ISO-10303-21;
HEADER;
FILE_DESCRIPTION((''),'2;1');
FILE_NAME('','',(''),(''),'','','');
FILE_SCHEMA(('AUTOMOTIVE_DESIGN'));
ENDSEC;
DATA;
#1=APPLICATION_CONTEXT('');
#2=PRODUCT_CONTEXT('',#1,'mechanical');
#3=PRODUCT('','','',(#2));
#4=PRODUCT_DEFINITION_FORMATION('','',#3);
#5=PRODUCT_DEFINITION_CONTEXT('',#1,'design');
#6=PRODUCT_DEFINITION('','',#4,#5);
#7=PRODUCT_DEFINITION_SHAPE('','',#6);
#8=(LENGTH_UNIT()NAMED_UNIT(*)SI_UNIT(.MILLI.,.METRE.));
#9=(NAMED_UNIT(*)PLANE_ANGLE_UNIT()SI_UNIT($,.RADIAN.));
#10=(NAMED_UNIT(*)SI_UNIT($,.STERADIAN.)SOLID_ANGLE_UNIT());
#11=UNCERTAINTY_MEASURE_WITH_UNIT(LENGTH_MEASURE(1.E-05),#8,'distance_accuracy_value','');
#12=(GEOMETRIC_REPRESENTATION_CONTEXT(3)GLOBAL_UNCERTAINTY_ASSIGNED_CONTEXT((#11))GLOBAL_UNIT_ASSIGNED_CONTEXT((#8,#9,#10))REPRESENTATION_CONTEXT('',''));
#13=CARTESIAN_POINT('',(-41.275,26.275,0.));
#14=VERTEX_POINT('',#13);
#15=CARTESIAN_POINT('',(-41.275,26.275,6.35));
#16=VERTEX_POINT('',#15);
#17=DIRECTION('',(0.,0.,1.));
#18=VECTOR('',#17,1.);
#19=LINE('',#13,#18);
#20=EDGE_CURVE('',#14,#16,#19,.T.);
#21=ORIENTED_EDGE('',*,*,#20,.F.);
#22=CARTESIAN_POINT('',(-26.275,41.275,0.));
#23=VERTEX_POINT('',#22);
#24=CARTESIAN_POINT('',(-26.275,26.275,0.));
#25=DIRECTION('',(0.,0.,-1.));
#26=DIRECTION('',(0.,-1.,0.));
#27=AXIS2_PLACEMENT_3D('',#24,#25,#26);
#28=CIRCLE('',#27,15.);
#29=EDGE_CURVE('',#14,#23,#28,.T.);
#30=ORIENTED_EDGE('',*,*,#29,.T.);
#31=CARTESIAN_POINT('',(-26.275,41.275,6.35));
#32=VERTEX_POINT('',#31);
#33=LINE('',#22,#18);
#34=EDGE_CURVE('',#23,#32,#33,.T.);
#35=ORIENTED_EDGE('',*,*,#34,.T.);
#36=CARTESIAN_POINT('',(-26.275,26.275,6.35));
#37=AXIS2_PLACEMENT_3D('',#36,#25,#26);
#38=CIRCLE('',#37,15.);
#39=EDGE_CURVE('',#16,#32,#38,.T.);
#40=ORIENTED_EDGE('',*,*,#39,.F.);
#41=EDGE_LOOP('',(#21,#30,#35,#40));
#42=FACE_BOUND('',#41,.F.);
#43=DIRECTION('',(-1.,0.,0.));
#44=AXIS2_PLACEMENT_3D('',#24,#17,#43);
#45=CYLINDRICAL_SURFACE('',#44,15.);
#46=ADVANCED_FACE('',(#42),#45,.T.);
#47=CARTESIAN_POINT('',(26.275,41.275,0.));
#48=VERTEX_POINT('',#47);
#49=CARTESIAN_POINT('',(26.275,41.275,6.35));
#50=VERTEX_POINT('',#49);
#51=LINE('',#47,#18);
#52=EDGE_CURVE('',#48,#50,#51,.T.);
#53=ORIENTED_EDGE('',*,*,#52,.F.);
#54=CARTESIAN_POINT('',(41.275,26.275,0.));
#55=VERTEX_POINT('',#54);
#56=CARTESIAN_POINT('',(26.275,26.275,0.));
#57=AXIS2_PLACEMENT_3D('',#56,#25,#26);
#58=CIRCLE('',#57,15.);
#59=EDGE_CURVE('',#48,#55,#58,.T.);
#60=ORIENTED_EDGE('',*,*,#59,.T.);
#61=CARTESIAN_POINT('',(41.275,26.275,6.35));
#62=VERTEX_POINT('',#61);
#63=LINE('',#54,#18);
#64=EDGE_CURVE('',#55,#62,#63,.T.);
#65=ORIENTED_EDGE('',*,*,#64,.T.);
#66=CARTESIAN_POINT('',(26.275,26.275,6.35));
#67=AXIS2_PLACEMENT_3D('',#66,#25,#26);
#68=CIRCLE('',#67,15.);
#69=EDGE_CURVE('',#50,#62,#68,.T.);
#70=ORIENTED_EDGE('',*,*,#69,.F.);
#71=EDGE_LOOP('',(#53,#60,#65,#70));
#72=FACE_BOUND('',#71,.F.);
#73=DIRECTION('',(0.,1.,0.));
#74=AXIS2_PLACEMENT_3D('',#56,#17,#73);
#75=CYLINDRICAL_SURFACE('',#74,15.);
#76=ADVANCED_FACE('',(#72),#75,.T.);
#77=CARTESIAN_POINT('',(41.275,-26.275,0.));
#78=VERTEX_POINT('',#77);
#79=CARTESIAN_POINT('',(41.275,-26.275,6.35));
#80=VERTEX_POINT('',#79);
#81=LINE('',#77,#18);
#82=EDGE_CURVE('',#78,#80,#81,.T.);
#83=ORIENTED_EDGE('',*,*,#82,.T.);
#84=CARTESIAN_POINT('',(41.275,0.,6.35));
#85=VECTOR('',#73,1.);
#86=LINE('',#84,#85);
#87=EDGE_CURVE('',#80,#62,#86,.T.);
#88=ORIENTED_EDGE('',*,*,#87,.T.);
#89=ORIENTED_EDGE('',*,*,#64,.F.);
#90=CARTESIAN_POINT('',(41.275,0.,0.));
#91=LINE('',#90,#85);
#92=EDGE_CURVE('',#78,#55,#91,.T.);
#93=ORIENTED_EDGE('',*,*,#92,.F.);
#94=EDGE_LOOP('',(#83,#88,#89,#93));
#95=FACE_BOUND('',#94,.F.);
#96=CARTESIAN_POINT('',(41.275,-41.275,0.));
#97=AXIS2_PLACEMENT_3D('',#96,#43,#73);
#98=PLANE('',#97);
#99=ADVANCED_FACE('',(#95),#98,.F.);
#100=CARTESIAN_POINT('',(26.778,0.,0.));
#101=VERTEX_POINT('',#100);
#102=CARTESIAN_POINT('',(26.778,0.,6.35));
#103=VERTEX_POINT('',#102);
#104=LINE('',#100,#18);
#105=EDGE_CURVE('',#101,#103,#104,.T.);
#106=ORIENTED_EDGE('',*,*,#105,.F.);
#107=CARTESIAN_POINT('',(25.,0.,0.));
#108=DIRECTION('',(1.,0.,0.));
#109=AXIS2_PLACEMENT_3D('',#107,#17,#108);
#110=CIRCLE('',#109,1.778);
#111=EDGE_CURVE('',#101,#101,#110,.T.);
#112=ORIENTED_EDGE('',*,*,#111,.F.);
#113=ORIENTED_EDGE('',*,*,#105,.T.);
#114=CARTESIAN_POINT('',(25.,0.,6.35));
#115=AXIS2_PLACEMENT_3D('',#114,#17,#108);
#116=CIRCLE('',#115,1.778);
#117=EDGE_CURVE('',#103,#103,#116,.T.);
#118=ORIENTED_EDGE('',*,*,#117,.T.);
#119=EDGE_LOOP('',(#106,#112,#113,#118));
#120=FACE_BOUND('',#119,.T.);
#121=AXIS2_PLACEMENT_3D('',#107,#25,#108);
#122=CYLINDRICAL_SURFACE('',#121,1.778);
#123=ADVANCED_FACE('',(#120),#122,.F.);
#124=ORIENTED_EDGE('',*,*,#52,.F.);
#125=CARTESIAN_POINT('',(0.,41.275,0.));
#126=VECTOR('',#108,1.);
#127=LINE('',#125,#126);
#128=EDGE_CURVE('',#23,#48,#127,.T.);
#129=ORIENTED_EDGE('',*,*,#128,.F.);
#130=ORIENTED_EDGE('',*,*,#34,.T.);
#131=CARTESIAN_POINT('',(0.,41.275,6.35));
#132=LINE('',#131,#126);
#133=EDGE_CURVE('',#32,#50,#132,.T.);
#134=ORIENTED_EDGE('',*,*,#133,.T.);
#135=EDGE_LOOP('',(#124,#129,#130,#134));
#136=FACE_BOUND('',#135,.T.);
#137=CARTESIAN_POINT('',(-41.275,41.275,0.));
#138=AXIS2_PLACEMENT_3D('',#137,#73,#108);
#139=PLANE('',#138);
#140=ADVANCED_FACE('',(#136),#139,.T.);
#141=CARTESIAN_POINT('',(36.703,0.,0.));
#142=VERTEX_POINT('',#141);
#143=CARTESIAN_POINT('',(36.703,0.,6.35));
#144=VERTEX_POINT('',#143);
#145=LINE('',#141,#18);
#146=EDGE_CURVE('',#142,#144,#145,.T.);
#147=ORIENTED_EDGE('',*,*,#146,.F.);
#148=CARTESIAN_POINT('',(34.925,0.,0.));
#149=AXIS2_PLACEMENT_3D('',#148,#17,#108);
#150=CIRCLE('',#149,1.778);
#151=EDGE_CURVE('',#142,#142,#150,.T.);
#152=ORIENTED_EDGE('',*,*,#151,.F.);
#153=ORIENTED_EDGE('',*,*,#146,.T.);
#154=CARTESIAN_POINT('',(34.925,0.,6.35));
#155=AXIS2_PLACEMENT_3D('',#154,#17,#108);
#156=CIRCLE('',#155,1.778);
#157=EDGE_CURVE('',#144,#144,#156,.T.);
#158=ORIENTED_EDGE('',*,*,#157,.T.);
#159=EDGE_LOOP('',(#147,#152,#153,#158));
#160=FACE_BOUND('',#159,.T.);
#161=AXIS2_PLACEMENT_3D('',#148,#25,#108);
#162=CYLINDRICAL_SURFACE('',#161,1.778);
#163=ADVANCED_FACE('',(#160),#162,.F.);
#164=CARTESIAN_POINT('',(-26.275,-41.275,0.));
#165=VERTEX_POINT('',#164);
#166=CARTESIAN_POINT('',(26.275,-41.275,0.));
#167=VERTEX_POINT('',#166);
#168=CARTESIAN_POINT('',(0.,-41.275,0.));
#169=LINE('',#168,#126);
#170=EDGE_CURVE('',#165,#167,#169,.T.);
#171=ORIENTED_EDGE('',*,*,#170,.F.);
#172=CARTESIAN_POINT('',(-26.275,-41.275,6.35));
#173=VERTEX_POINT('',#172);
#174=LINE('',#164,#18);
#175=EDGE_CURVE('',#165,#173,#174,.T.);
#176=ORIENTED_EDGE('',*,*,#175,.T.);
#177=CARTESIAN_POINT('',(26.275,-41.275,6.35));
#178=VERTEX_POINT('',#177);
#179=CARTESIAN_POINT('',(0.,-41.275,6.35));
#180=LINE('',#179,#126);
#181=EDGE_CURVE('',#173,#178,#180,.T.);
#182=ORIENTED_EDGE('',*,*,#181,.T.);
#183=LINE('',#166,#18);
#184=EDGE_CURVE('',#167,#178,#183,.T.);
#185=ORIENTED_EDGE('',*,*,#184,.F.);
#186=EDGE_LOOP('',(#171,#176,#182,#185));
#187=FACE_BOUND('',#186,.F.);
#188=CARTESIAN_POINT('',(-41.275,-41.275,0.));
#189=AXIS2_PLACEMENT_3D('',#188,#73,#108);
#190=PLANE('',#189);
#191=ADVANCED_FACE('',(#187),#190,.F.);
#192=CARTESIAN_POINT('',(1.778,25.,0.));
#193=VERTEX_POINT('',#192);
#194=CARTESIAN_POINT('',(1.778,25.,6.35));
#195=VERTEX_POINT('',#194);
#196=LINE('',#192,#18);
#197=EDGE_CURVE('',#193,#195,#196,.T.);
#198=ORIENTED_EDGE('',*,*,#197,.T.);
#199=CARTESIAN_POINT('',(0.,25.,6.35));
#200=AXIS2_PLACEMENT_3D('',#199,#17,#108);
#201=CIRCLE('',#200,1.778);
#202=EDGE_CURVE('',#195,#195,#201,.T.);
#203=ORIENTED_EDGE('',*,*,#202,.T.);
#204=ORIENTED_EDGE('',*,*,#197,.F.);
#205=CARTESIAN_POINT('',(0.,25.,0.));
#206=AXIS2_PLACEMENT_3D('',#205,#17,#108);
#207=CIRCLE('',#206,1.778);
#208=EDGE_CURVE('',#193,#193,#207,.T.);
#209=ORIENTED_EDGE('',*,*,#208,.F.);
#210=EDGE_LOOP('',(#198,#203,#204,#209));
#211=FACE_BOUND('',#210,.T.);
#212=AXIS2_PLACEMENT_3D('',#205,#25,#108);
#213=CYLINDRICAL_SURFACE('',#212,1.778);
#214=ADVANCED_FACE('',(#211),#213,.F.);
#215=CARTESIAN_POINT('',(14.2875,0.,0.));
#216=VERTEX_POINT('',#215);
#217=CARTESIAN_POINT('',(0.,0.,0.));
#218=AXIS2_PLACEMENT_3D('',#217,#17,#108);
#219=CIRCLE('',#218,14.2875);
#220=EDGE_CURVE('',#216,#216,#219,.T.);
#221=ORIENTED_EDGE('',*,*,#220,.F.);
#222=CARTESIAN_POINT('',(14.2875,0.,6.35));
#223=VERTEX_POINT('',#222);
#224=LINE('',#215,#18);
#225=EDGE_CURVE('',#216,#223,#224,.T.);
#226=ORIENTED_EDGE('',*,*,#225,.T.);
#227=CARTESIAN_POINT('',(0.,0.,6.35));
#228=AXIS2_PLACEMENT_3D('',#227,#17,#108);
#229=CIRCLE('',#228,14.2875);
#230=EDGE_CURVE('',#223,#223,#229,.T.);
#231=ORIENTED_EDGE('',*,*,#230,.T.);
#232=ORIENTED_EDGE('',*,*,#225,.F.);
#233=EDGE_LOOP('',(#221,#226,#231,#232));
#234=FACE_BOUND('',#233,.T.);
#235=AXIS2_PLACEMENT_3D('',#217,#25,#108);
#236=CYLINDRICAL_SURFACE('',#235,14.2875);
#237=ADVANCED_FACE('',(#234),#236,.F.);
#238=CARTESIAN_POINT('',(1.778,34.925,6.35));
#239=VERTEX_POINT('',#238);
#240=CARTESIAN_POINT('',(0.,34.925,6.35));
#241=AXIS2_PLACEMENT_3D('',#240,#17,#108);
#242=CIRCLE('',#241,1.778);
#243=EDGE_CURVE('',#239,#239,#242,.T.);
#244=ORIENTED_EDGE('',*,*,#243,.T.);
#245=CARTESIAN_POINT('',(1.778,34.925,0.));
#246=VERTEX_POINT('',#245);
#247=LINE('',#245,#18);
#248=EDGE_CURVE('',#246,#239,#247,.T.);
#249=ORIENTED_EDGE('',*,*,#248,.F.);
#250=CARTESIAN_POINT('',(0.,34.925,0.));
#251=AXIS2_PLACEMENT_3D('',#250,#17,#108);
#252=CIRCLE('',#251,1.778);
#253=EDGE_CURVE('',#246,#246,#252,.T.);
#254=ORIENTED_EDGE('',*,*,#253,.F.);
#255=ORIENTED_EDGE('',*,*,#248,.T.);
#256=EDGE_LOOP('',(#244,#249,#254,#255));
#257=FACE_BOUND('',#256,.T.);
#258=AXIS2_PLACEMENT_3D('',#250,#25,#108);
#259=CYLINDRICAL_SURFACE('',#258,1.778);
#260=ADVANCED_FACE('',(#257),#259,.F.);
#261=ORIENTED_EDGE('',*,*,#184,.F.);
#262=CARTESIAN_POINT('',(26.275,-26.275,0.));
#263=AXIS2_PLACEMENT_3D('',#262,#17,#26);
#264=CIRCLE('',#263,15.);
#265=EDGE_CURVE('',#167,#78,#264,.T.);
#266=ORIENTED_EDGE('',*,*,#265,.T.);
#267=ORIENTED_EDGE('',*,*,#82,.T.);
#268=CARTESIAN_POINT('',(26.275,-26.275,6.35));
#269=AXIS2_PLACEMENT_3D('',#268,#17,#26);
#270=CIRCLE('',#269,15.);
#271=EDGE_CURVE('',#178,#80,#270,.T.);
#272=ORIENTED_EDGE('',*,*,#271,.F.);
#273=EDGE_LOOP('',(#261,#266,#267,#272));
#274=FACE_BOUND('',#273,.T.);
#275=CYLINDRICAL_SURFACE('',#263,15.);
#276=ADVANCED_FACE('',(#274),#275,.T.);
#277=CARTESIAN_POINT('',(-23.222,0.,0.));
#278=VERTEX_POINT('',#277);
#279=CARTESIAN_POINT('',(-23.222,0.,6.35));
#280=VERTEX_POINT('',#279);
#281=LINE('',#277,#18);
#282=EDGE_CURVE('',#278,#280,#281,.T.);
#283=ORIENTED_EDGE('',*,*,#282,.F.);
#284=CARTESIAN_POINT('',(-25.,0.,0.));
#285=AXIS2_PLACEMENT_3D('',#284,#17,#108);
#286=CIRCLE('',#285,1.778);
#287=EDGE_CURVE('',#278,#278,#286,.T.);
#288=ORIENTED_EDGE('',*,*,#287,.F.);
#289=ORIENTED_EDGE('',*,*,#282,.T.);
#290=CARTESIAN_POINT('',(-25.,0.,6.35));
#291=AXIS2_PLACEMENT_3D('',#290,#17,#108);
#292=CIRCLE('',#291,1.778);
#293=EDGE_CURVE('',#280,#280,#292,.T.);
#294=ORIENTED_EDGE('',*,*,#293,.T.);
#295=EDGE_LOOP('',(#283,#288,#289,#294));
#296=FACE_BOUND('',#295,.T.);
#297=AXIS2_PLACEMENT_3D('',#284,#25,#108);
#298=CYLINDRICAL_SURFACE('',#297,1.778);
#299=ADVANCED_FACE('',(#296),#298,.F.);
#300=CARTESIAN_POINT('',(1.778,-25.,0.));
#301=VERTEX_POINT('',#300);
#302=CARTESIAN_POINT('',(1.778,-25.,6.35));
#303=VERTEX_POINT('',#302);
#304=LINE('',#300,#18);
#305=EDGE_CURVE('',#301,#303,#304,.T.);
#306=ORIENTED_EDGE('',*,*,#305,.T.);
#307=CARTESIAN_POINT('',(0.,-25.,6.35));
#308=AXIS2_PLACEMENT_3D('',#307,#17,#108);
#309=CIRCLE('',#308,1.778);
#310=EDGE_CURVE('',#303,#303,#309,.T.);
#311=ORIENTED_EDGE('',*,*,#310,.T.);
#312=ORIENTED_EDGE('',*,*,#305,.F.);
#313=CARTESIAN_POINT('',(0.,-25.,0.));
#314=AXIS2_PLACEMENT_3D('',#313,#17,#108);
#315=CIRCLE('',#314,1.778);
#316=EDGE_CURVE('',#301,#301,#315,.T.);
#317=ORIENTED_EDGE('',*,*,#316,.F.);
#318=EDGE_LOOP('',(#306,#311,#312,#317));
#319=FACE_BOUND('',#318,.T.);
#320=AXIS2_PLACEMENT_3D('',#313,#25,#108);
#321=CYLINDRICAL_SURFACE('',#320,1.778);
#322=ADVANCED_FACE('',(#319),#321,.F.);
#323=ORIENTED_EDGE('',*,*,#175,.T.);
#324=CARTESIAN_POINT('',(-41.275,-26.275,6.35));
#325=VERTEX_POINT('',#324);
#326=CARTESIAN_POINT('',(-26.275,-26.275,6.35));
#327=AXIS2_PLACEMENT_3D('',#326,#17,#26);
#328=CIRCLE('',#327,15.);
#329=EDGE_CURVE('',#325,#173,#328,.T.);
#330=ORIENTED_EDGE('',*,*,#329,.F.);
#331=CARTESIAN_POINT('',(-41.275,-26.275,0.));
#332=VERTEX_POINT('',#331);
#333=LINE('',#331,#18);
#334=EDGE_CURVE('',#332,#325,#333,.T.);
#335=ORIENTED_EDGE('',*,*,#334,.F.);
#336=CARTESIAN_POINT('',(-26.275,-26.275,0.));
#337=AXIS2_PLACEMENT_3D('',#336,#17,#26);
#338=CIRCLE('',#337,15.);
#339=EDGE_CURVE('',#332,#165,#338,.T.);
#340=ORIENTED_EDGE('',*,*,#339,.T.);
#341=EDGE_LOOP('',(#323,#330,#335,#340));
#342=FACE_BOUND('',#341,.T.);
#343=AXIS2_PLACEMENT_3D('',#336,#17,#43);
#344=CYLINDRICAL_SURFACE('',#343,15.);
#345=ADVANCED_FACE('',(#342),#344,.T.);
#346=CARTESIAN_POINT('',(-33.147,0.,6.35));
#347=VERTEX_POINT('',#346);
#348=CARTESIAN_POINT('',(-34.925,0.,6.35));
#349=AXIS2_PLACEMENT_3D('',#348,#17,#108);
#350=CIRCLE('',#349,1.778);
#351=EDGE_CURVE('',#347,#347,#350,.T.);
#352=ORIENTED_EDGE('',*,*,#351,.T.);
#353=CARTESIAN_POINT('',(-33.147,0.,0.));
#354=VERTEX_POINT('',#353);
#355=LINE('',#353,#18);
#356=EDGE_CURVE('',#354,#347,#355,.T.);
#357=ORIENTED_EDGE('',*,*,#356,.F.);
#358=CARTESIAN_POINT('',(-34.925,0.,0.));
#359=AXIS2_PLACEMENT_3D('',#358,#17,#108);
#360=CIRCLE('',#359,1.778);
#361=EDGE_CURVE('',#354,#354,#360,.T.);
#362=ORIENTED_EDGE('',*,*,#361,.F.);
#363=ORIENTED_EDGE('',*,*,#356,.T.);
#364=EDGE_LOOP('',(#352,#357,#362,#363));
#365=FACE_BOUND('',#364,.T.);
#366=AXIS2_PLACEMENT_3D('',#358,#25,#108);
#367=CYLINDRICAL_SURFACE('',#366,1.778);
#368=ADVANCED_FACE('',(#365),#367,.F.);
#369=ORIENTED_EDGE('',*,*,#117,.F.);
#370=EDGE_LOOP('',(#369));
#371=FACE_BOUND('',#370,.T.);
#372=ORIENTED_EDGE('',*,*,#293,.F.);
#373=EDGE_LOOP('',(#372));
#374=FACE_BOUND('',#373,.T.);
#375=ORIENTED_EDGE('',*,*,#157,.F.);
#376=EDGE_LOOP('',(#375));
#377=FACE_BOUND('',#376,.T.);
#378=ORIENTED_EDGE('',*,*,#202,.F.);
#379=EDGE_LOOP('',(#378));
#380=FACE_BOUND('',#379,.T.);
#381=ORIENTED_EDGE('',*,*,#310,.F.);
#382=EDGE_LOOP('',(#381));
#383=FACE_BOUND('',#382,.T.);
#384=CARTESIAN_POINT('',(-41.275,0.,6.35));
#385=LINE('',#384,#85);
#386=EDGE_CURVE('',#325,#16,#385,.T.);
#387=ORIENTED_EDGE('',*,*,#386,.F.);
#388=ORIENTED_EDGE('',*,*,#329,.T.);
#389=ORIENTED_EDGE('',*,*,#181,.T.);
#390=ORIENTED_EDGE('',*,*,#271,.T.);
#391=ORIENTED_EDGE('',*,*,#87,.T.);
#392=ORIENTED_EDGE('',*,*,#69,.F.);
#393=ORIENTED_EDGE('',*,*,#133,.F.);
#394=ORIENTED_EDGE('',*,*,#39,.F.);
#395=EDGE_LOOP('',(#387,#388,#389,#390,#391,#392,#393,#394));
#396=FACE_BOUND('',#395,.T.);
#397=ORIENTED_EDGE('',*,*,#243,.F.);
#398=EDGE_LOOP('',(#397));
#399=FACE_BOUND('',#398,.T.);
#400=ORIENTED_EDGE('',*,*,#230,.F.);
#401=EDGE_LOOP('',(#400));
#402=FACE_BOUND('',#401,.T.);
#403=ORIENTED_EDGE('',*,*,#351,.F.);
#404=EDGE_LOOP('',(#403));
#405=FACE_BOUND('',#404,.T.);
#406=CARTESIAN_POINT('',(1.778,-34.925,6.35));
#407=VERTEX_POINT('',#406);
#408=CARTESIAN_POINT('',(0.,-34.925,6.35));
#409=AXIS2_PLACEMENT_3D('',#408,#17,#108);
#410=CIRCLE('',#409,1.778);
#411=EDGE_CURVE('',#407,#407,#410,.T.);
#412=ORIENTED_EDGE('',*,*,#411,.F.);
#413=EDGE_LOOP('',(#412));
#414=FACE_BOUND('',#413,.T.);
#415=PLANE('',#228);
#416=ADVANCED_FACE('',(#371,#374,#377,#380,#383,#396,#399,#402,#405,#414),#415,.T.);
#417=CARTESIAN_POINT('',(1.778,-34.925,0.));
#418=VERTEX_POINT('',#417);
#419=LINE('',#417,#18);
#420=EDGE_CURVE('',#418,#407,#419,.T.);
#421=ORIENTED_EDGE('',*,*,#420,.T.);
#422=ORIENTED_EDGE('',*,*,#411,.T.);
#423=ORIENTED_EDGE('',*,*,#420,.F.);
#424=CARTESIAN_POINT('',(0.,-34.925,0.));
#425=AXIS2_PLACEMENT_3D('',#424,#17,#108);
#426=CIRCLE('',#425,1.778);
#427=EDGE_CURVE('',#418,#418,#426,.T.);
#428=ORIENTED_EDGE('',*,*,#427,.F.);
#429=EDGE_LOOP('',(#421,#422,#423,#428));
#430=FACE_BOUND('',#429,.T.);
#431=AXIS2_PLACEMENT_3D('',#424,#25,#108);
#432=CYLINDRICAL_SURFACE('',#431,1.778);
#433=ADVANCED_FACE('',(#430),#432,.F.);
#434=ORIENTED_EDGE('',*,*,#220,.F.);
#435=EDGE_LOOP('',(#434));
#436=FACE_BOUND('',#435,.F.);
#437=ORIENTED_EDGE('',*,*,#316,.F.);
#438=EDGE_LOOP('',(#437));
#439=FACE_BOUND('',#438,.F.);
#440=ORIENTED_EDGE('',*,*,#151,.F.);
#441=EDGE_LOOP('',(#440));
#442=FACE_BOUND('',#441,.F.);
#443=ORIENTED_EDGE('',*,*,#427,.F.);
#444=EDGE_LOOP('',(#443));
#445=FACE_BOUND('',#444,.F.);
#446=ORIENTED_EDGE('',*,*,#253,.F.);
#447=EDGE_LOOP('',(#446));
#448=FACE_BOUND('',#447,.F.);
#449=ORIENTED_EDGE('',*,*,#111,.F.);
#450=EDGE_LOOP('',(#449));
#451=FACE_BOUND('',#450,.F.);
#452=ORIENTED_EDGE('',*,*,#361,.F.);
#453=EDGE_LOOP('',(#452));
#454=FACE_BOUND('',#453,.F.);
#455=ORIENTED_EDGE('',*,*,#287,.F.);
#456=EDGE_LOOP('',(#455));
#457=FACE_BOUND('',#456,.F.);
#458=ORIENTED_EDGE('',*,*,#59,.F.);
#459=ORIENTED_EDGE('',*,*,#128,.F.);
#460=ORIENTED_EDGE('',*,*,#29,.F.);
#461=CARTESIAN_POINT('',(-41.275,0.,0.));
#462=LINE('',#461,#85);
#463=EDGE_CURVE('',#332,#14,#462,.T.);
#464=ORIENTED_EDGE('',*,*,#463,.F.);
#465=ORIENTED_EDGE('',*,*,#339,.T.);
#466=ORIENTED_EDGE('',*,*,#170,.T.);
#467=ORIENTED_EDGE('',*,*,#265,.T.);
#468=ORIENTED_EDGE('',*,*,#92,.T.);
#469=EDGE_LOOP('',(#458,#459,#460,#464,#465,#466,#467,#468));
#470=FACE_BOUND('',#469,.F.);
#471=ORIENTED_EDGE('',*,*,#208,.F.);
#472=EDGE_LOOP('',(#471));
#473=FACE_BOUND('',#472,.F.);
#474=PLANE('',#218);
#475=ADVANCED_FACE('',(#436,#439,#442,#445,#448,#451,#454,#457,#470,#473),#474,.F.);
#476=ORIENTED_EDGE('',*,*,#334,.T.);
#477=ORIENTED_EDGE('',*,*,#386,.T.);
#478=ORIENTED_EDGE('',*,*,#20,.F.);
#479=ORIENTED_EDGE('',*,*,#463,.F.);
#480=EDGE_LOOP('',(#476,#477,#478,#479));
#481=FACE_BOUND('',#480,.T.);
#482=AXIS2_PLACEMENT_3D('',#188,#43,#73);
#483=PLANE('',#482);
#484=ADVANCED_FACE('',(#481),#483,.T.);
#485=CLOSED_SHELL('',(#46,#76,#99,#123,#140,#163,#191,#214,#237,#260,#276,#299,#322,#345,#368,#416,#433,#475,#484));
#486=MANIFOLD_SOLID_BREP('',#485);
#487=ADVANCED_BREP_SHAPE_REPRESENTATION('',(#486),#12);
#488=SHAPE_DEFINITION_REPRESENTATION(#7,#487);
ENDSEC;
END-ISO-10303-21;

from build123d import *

# Parameters (mm, degrees)
F0_W     = 82.55
F0_H     = 82.55
F0_R     = 1.778
F0_R_2   = 14.2875
F1_DEPTH = 6.35
F2_R     = 15


# Not quite as in the source:
# - a length typed as a fraction of an inch, garbled in the dataset ("3 / 203.2 mm" for 3/8 in), is restored


with BuildPart() as f1:
    # F0 (on Top) → F1 (new body)
    with BuildSketch(Plane.XY):
        Rectangle(F0_W, F0_H)
        with Locations((0, -34.925)):
            Circle(F0_R, mode=Mode.SUBTRACT)
        with Locations((0, -25)):
            Circle(F0_R, mode=Mode.SUBTRACT)
        with Locations((-34.925, 0)):
            Circle(F0_R, mode=Mode.SUBTRACT)
        with Locations((-25, 0)):
            Circle(F0_R, mode=Mode.SUBTRACT)
        Circle(F0_R_2, mode=Mode.SUBTRACT)
        with Locations((25, 0)):
            Circle(F0_R, mode=Mode.SUBTRACT)
        with Locations((34.925, 0)):
            Circle(F0_R, mode=Mode.SUBTRACT)
        with Locations((0, 25)):
            Circle(F0_R, mode=Mode.SUBTRACT)
        with Locations((0, 34.925)):
            Circle(F0_R, mode=Mode.SUBTRACT)
    extrude(amount=F1_DEPTH)

    # F2
    f2_edges = [f1.edges().sort_by_distance(p)[0] for p in [
        (-41.275, 41.275, 3.175),
        (-41.275, -41.275, 3.175),
        (41.275, 41.275, 3.175),
        (41.275, -41.275, 3.175),
    ]]
    fillet(f2_edges, radius=F2_R)


solid = f1.part
